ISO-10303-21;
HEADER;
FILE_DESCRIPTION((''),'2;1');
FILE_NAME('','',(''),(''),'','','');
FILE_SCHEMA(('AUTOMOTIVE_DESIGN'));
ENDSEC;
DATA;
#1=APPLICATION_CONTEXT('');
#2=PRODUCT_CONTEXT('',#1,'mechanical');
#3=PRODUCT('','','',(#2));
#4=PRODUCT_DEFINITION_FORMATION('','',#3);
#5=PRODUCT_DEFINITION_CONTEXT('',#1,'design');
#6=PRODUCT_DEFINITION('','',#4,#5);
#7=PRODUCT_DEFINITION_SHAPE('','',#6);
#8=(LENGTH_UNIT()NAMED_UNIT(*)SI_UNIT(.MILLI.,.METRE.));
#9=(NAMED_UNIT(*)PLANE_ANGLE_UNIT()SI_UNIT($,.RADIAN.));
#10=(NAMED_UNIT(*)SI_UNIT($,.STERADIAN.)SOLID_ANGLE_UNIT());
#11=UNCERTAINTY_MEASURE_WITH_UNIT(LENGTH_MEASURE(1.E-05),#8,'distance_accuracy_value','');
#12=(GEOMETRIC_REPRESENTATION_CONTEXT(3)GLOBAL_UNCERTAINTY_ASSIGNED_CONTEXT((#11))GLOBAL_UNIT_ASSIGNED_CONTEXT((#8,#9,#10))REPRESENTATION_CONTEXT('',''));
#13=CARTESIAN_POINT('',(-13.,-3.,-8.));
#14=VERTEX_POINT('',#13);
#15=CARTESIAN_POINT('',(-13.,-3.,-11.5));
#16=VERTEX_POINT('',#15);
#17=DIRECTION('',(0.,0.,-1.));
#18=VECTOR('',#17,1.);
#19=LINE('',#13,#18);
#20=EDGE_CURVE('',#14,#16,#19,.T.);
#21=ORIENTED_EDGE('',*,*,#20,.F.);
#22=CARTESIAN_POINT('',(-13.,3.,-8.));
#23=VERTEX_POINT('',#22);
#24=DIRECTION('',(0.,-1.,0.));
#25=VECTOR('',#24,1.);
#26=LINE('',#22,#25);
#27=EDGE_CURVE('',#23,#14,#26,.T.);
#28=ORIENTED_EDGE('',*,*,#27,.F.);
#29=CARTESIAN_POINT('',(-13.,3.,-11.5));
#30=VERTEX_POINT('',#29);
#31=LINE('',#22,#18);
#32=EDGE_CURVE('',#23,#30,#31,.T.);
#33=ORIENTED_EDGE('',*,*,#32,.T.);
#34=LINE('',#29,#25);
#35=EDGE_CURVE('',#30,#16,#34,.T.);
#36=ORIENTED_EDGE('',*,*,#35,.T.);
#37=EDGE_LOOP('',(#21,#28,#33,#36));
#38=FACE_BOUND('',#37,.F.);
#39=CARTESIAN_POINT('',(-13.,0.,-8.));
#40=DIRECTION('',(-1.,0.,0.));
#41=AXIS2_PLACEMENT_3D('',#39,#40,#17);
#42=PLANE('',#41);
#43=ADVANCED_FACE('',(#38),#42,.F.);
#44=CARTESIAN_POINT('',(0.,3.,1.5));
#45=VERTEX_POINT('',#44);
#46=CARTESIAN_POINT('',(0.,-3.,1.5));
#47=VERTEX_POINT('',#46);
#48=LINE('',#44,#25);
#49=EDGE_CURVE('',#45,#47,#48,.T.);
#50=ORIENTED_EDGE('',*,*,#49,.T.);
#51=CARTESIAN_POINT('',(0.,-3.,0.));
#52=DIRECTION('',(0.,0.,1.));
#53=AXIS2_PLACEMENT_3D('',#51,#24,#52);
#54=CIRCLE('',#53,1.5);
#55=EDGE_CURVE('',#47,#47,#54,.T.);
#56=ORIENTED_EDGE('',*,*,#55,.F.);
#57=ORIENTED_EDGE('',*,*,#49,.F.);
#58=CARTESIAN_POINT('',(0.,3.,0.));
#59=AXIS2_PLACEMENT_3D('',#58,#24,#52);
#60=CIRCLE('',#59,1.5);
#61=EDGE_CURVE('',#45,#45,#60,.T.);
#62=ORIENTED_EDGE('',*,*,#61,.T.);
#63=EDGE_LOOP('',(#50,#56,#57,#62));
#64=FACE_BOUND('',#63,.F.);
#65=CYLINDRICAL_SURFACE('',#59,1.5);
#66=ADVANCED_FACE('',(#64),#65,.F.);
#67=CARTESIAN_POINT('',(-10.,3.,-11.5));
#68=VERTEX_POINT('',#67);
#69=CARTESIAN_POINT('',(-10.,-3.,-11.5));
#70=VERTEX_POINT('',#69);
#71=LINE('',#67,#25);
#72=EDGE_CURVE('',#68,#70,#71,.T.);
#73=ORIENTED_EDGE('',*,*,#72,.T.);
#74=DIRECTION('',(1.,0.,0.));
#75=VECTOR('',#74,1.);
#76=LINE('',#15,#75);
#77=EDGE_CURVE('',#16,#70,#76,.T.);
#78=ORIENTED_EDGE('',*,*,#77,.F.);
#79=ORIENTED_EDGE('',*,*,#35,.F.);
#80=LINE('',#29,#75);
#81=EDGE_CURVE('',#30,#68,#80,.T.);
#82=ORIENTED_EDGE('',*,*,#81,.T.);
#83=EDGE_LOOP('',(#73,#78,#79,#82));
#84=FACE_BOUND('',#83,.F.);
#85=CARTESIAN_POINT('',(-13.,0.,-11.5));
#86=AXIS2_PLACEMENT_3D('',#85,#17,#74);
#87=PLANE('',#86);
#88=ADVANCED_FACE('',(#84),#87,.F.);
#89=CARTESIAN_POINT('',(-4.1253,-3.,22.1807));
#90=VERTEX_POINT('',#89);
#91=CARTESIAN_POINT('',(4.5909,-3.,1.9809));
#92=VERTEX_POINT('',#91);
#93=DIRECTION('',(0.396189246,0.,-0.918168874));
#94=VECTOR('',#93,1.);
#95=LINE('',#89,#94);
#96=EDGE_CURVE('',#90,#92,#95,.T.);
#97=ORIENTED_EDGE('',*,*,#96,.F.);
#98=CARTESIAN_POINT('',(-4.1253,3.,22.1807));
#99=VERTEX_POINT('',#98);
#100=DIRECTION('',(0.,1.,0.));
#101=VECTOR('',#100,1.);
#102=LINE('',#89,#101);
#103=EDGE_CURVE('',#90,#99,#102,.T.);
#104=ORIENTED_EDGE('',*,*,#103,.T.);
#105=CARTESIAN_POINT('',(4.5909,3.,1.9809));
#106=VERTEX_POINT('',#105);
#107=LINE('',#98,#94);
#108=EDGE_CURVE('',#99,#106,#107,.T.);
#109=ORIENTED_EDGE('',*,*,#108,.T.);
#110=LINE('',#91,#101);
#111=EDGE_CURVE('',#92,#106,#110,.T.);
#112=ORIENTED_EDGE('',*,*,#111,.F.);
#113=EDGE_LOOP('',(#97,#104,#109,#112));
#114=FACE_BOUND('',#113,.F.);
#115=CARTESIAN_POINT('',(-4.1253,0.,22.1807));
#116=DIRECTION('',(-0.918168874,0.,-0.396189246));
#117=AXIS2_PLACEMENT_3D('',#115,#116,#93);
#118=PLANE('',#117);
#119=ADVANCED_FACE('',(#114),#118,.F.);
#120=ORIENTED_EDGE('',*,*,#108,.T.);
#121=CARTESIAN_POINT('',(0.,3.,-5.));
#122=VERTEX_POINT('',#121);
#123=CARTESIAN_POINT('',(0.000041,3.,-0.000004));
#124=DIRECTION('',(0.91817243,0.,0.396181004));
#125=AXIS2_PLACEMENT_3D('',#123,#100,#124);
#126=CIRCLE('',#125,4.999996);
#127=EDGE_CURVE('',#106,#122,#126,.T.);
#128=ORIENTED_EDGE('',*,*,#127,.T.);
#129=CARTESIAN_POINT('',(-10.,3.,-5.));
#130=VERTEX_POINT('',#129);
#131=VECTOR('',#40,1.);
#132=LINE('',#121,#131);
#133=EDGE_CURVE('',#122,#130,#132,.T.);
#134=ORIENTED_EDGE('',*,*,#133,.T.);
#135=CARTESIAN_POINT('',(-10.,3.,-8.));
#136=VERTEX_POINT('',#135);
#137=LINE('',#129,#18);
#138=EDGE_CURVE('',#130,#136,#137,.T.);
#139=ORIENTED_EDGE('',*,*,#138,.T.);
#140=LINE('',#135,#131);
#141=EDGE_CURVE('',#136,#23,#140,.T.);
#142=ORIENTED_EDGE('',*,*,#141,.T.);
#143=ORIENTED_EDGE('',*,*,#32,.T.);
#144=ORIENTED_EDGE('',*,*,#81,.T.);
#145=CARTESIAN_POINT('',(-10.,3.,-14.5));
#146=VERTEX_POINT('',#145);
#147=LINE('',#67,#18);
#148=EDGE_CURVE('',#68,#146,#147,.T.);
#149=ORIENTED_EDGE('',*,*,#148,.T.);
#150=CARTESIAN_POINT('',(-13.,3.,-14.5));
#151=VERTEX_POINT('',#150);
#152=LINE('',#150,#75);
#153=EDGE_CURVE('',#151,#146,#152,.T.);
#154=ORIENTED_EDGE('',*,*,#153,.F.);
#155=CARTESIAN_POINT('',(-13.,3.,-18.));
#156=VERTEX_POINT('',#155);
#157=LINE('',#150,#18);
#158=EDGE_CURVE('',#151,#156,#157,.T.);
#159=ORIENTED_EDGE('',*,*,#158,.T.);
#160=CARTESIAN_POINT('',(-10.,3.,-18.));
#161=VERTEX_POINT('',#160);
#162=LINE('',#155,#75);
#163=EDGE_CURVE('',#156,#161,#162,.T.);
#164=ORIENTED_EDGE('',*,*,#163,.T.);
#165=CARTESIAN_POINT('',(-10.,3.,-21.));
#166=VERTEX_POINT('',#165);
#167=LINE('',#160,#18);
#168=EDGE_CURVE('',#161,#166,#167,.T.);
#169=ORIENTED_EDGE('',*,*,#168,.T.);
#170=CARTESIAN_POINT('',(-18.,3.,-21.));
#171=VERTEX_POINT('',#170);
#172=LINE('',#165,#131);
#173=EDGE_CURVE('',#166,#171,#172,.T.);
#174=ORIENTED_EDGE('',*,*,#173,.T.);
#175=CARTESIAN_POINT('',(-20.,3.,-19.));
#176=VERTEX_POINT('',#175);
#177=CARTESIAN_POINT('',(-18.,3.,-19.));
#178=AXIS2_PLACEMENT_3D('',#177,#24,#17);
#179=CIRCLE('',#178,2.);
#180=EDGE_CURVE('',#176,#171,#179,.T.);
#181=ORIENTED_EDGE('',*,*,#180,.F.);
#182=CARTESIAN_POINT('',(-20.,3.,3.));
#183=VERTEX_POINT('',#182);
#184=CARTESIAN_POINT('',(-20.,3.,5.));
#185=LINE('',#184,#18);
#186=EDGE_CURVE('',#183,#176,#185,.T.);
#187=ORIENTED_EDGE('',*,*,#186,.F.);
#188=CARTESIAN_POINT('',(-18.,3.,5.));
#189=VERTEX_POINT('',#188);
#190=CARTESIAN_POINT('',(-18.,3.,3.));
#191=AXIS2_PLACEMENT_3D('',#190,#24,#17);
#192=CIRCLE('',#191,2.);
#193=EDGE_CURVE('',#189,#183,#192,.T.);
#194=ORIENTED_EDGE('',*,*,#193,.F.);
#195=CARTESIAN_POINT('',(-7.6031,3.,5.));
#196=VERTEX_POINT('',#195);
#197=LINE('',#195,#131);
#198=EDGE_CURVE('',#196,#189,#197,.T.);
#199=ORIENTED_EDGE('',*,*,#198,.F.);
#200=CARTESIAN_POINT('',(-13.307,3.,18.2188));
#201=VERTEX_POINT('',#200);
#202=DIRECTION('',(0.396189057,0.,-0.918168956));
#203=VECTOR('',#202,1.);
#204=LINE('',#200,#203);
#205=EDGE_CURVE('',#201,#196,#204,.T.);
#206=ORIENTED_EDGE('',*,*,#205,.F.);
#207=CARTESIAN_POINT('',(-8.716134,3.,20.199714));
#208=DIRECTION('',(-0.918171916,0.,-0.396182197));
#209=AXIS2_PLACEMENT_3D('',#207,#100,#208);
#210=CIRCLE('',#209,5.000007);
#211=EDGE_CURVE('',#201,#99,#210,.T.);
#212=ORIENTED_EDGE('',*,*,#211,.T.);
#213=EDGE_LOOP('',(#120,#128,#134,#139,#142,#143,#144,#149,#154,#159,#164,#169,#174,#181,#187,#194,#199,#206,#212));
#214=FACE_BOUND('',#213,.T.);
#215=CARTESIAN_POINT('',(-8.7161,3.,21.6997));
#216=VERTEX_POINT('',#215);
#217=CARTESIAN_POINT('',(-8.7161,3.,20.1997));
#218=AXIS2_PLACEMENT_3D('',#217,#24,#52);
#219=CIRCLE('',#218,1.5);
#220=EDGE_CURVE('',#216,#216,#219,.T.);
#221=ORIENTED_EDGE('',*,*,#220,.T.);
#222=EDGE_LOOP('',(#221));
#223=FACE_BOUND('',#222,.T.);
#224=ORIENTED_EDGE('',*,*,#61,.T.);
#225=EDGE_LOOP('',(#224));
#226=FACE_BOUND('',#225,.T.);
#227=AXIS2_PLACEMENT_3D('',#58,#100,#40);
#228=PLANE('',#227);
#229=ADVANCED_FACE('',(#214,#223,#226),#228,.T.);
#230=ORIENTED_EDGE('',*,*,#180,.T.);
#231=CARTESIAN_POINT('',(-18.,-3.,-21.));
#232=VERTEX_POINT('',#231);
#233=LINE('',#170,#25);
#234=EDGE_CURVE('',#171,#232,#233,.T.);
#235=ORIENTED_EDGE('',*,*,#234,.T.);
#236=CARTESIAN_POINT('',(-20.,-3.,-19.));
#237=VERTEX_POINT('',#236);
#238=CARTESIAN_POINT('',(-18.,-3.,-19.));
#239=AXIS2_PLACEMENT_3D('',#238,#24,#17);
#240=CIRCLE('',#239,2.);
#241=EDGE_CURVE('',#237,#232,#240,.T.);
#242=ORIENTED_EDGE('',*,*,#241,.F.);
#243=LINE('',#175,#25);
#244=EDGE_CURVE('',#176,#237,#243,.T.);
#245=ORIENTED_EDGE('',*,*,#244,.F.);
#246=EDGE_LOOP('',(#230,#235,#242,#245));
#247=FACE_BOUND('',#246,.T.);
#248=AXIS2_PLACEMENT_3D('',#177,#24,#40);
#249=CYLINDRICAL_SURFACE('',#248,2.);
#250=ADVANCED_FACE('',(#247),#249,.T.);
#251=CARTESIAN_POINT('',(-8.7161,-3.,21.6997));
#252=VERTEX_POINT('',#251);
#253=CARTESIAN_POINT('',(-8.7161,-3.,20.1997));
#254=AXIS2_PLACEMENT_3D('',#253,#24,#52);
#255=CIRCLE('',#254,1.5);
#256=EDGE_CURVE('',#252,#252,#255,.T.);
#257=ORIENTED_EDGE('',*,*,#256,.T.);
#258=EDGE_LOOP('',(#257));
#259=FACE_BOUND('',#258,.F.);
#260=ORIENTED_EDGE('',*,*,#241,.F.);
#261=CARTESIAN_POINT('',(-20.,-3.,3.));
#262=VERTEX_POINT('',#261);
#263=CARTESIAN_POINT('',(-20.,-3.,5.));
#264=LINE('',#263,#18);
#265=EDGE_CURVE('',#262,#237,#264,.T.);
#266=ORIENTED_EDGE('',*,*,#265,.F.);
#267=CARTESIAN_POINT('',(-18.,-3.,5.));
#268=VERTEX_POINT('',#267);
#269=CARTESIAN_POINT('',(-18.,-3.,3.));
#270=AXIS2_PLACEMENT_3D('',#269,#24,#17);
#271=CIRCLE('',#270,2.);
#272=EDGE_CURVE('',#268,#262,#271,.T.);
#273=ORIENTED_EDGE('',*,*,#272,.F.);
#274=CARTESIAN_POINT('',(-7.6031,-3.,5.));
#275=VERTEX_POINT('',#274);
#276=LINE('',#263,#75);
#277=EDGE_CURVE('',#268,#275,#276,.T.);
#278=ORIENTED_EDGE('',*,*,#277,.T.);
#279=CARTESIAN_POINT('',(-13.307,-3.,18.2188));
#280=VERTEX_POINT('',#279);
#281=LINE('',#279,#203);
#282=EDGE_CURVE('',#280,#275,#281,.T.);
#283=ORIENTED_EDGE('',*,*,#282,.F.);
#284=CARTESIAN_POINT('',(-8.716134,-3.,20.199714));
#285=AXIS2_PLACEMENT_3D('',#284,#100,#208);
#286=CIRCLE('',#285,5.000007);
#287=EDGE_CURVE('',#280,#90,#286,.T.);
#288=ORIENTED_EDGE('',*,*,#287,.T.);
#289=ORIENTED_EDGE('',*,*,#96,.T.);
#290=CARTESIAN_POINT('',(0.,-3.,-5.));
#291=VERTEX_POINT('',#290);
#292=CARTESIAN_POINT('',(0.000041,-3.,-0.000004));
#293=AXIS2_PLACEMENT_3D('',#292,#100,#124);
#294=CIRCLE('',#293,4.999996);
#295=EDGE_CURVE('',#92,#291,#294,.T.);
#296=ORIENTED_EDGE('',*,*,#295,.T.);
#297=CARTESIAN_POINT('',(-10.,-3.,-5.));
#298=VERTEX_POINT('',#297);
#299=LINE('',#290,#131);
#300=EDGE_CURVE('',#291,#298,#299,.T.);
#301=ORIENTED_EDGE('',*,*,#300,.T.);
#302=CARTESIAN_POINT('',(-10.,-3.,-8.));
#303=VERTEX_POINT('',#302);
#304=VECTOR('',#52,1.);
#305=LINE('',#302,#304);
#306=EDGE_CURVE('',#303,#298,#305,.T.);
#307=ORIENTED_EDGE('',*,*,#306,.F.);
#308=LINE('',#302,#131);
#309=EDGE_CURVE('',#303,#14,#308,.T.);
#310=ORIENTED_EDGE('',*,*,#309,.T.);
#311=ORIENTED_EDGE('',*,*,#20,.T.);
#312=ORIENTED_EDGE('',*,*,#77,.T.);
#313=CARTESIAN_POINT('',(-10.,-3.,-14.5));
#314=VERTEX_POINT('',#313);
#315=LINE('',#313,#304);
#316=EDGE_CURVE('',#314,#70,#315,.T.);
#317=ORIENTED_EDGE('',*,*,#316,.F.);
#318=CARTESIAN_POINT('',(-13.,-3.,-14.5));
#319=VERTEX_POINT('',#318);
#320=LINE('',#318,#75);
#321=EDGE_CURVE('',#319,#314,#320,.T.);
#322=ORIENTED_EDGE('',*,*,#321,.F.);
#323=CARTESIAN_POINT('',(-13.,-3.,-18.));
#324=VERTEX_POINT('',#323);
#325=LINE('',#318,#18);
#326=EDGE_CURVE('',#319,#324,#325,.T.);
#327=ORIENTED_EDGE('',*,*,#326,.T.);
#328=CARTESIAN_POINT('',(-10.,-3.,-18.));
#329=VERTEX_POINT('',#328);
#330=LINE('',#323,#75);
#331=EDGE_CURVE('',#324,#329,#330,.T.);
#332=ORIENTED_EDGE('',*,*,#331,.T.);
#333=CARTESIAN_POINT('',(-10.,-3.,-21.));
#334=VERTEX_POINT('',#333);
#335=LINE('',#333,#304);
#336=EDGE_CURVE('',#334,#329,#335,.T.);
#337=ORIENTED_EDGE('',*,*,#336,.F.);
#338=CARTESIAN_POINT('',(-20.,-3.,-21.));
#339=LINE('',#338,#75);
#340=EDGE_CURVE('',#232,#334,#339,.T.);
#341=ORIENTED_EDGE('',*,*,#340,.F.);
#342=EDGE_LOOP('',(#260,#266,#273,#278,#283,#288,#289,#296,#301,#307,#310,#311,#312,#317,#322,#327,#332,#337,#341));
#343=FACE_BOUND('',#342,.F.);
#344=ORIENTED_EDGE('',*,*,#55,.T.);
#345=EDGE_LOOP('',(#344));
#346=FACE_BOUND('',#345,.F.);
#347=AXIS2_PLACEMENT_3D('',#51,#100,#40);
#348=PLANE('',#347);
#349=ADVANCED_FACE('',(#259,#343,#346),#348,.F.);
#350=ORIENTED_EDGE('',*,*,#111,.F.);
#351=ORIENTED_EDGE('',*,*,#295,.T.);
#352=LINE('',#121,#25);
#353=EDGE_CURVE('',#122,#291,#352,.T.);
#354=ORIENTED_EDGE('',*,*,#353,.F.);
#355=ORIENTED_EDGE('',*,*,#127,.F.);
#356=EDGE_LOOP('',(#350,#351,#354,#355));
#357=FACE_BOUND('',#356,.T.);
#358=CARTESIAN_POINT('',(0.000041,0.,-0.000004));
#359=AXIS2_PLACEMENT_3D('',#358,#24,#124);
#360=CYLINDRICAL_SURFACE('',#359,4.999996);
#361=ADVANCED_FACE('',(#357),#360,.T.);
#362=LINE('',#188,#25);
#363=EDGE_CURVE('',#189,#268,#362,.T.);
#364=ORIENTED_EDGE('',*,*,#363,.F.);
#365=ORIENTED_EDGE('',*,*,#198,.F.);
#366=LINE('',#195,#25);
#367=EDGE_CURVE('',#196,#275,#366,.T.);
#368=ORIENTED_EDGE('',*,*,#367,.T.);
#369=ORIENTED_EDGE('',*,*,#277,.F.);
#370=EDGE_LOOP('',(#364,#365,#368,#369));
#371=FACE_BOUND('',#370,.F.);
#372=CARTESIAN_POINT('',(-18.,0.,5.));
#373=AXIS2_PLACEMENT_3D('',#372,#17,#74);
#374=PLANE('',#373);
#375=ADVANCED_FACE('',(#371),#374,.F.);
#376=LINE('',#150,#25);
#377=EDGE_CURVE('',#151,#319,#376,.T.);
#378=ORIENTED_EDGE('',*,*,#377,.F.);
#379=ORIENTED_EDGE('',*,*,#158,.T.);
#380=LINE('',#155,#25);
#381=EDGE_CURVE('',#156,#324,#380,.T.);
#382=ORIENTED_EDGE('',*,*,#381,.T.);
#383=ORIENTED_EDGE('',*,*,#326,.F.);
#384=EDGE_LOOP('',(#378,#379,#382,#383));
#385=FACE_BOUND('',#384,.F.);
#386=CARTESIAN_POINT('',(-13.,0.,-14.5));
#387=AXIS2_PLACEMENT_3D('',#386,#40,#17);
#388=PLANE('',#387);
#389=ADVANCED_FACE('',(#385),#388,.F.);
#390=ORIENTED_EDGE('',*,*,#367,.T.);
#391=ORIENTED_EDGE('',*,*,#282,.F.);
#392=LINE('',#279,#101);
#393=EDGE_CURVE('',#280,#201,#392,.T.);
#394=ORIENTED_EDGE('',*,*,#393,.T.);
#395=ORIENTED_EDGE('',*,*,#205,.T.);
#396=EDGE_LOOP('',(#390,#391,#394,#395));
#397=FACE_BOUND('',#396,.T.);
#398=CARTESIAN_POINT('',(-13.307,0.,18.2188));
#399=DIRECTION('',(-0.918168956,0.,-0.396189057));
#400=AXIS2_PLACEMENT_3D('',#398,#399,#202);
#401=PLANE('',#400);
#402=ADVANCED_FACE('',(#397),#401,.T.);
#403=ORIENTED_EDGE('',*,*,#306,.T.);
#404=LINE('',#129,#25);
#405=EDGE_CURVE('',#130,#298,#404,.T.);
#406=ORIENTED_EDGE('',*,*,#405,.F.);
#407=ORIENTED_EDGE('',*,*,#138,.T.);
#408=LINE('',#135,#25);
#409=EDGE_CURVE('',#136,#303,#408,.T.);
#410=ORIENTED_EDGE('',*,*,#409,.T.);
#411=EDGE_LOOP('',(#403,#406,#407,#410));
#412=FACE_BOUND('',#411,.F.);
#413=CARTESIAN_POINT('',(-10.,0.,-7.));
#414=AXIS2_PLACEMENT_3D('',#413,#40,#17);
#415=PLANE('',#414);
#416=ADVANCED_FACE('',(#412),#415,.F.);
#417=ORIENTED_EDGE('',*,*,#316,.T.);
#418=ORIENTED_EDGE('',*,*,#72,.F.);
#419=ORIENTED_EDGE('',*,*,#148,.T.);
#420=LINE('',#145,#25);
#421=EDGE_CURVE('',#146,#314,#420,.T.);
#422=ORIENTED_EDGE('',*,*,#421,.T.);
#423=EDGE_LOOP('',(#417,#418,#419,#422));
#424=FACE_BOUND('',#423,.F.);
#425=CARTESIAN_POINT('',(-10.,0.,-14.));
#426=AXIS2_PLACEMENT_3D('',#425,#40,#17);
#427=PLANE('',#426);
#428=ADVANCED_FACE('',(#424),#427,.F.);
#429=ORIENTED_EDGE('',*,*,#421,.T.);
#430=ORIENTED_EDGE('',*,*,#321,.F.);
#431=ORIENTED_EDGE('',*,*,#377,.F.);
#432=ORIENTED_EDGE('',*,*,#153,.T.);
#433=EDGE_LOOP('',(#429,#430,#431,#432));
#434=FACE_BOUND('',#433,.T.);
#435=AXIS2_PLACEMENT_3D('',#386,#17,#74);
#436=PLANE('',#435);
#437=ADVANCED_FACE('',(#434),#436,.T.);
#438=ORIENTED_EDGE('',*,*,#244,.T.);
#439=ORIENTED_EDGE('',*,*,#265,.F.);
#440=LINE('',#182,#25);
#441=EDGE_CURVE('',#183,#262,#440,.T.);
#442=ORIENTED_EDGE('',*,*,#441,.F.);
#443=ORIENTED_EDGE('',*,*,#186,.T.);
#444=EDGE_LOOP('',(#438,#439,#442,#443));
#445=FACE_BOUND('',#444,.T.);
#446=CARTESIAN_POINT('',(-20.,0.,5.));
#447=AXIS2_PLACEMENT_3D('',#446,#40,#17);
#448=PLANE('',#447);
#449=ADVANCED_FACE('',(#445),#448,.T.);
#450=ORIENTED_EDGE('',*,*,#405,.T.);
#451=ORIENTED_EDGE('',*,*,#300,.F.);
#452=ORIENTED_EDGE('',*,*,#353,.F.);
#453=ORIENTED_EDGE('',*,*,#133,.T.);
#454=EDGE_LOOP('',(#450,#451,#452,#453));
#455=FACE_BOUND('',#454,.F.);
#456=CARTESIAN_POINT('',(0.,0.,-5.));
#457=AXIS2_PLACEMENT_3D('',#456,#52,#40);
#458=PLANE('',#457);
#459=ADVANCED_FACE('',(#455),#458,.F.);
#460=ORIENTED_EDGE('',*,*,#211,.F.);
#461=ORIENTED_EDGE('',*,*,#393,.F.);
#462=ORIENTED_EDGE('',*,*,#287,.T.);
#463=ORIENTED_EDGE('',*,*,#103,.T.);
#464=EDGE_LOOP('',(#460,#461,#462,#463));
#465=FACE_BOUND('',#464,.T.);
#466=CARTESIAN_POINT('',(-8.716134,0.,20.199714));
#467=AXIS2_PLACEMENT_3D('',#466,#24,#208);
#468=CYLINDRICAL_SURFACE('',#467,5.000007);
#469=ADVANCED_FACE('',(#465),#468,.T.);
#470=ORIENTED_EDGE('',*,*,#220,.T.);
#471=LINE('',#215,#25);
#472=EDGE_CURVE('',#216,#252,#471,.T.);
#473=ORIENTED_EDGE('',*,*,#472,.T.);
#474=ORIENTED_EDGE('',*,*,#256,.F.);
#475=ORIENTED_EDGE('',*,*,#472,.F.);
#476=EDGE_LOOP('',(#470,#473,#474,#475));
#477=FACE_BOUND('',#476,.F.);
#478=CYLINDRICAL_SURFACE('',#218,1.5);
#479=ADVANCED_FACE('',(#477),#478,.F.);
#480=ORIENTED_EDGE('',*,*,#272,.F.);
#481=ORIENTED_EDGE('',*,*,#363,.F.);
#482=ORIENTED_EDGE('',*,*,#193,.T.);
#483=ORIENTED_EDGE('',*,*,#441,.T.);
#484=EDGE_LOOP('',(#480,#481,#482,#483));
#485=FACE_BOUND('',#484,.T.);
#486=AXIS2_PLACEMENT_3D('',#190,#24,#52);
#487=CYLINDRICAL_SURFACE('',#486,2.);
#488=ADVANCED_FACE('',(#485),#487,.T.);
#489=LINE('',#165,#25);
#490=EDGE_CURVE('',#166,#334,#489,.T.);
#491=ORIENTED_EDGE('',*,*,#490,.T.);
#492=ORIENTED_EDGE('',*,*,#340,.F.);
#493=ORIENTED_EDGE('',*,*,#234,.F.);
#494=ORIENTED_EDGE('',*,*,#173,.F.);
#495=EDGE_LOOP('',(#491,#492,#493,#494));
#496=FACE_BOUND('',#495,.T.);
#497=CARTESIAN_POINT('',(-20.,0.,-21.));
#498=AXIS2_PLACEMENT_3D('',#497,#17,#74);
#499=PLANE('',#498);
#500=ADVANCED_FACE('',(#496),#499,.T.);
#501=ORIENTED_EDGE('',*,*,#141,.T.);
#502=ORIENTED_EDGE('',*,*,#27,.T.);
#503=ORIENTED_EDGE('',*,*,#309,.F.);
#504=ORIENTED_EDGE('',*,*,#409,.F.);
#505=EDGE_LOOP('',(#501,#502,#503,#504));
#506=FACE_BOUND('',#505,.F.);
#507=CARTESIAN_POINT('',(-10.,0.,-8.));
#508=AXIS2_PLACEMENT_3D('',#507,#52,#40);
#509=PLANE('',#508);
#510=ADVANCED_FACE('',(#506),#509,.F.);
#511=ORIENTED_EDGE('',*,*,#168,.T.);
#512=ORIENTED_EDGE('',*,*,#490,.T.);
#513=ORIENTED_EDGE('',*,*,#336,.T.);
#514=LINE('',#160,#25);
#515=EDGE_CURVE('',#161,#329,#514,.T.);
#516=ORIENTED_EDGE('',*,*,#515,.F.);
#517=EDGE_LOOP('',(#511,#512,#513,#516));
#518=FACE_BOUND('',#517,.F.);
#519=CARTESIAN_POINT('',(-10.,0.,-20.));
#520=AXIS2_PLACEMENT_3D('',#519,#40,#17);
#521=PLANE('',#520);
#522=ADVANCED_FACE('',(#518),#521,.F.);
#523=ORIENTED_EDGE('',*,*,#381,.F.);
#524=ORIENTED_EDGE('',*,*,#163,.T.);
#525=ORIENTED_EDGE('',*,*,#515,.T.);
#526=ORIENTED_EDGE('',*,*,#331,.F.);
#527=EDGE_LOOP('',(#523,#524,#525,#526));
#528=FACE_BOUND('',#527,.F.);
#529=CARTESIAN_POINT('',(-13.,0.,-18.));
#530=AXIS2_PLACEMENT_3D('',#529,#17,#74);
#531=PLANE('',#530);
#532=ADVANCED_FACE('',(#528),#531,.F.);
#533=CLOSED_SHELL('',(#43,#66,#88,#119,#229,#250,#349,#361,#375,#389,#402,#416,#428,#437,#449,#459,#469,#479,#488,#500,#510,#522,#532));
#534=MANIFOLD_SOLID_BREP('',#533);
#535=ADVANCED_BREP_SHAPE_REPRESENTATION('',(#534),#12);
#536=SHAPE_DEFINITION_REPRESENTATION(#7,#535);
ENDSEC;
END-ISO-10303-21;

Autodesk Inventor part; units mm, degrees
ref_plane "YZ Plane" through (0, 0, 0) normal (1, 0, 0) x (0, 1, 0)
ref_plane "XZ Plane" through (0, 0, 0) normal (0, 1, 0) x (-1, 0, 0)
ref_plane "XY Plane" through (0, 0, 0) normal (0, 0, 1) x (1, 0, 0)
sketch "Szkic1" plane through (0, 0, 0) normal (0, 1, 0) x (-1, 0, 0)
  arc A0 (13.307, 18.2188) -> (4.1253, 22.1807) centre (8.7161, 20.1997) ccw
  line L0 (4.1253, 22.1807) -> (-4.5909, 1.9809)
  line L1 (13.307, 18.2188) -> (7.6031, 5)
  arc A1 (-4.5909, 1.9809) -> (0, -5) centre (0, 0) ccw
  line L2 (8, -5) -> (10.5, -5) construction
  line L3 (10, -19) -> (10, -20)
  line L4 (10, -20) -> (10, -21)
  line L5 (10, -7) -> (10, -5)
  line L6 (10, -12) -> (10, -14)
  line L7 (10, -14) -> (10, -14.5)
  line L8 (20, -21) -> (10, -21)
  line L9 (13, -18) -> (10, -18)
  line L10 (10, -18) -> (10, -19)
  line L11 (10, -7) -> (10, -8)
  line L12 (10, -8) -> (13, -8)
  line L13 (13, -11.5) -> (10, -11.5)
  line L14 (10, -11.5) -> (10, -12)
  line L15 (13, -14.5) -> (10, -14.5)
  line L16 (10, -18) -> (13, -18)
  line L17 (13, -8) -> (13, -11.5)
  line L18 (13, -14.5) -> (13, -18)
  line L19 (18, 5) -> (20, 5)
  line L20 (20, 5) -> (20, -21)
  line L21 (20, -21) -> (18, -21)
  line L22 (0, -5) -> (10, -5)
  line L23 (18, 5) -> (7.6031, 5)
  arc A2 (13.307, 18.2188) -> (4.1253, 22.1807) centre (8.7161, 20.1997) ccw
extrude "Wyciągnięcie proste6" add sketch "Szkic1" along normal mid plane 6
fillet "Zaokrąglenie3" radius 2 2 edges at (-20, 0, -21) (-20, 0, 5)
fillet_without_effect "Fillet4"
sketch "Sketch8" plane through (0, 3, 0) normal (0, 1, 0) x (1, 0, 0)
  point P0 (0, 0)
  point P1 (0, 0)
hole "Hole1" at (0, 3, 0) direction (0, -1, 0) diameter 3 end through all
sketch "Sketch9" plane through (0, 3, 0) normal (0, 1, 0) x (1, 0, 0)
  arc A0 (-13.307, -18.2188) -> (-4.1253, -22.1807) centre (-8.7161, -20.1997) ccw projected
  point P0 (0, 0)
hole "Hole2" at (-8.7161, 3, 20.1997) direction (0, -1, 0) diameter 3 end through all
properties part number "Chwytak wersja 3 - baza"
